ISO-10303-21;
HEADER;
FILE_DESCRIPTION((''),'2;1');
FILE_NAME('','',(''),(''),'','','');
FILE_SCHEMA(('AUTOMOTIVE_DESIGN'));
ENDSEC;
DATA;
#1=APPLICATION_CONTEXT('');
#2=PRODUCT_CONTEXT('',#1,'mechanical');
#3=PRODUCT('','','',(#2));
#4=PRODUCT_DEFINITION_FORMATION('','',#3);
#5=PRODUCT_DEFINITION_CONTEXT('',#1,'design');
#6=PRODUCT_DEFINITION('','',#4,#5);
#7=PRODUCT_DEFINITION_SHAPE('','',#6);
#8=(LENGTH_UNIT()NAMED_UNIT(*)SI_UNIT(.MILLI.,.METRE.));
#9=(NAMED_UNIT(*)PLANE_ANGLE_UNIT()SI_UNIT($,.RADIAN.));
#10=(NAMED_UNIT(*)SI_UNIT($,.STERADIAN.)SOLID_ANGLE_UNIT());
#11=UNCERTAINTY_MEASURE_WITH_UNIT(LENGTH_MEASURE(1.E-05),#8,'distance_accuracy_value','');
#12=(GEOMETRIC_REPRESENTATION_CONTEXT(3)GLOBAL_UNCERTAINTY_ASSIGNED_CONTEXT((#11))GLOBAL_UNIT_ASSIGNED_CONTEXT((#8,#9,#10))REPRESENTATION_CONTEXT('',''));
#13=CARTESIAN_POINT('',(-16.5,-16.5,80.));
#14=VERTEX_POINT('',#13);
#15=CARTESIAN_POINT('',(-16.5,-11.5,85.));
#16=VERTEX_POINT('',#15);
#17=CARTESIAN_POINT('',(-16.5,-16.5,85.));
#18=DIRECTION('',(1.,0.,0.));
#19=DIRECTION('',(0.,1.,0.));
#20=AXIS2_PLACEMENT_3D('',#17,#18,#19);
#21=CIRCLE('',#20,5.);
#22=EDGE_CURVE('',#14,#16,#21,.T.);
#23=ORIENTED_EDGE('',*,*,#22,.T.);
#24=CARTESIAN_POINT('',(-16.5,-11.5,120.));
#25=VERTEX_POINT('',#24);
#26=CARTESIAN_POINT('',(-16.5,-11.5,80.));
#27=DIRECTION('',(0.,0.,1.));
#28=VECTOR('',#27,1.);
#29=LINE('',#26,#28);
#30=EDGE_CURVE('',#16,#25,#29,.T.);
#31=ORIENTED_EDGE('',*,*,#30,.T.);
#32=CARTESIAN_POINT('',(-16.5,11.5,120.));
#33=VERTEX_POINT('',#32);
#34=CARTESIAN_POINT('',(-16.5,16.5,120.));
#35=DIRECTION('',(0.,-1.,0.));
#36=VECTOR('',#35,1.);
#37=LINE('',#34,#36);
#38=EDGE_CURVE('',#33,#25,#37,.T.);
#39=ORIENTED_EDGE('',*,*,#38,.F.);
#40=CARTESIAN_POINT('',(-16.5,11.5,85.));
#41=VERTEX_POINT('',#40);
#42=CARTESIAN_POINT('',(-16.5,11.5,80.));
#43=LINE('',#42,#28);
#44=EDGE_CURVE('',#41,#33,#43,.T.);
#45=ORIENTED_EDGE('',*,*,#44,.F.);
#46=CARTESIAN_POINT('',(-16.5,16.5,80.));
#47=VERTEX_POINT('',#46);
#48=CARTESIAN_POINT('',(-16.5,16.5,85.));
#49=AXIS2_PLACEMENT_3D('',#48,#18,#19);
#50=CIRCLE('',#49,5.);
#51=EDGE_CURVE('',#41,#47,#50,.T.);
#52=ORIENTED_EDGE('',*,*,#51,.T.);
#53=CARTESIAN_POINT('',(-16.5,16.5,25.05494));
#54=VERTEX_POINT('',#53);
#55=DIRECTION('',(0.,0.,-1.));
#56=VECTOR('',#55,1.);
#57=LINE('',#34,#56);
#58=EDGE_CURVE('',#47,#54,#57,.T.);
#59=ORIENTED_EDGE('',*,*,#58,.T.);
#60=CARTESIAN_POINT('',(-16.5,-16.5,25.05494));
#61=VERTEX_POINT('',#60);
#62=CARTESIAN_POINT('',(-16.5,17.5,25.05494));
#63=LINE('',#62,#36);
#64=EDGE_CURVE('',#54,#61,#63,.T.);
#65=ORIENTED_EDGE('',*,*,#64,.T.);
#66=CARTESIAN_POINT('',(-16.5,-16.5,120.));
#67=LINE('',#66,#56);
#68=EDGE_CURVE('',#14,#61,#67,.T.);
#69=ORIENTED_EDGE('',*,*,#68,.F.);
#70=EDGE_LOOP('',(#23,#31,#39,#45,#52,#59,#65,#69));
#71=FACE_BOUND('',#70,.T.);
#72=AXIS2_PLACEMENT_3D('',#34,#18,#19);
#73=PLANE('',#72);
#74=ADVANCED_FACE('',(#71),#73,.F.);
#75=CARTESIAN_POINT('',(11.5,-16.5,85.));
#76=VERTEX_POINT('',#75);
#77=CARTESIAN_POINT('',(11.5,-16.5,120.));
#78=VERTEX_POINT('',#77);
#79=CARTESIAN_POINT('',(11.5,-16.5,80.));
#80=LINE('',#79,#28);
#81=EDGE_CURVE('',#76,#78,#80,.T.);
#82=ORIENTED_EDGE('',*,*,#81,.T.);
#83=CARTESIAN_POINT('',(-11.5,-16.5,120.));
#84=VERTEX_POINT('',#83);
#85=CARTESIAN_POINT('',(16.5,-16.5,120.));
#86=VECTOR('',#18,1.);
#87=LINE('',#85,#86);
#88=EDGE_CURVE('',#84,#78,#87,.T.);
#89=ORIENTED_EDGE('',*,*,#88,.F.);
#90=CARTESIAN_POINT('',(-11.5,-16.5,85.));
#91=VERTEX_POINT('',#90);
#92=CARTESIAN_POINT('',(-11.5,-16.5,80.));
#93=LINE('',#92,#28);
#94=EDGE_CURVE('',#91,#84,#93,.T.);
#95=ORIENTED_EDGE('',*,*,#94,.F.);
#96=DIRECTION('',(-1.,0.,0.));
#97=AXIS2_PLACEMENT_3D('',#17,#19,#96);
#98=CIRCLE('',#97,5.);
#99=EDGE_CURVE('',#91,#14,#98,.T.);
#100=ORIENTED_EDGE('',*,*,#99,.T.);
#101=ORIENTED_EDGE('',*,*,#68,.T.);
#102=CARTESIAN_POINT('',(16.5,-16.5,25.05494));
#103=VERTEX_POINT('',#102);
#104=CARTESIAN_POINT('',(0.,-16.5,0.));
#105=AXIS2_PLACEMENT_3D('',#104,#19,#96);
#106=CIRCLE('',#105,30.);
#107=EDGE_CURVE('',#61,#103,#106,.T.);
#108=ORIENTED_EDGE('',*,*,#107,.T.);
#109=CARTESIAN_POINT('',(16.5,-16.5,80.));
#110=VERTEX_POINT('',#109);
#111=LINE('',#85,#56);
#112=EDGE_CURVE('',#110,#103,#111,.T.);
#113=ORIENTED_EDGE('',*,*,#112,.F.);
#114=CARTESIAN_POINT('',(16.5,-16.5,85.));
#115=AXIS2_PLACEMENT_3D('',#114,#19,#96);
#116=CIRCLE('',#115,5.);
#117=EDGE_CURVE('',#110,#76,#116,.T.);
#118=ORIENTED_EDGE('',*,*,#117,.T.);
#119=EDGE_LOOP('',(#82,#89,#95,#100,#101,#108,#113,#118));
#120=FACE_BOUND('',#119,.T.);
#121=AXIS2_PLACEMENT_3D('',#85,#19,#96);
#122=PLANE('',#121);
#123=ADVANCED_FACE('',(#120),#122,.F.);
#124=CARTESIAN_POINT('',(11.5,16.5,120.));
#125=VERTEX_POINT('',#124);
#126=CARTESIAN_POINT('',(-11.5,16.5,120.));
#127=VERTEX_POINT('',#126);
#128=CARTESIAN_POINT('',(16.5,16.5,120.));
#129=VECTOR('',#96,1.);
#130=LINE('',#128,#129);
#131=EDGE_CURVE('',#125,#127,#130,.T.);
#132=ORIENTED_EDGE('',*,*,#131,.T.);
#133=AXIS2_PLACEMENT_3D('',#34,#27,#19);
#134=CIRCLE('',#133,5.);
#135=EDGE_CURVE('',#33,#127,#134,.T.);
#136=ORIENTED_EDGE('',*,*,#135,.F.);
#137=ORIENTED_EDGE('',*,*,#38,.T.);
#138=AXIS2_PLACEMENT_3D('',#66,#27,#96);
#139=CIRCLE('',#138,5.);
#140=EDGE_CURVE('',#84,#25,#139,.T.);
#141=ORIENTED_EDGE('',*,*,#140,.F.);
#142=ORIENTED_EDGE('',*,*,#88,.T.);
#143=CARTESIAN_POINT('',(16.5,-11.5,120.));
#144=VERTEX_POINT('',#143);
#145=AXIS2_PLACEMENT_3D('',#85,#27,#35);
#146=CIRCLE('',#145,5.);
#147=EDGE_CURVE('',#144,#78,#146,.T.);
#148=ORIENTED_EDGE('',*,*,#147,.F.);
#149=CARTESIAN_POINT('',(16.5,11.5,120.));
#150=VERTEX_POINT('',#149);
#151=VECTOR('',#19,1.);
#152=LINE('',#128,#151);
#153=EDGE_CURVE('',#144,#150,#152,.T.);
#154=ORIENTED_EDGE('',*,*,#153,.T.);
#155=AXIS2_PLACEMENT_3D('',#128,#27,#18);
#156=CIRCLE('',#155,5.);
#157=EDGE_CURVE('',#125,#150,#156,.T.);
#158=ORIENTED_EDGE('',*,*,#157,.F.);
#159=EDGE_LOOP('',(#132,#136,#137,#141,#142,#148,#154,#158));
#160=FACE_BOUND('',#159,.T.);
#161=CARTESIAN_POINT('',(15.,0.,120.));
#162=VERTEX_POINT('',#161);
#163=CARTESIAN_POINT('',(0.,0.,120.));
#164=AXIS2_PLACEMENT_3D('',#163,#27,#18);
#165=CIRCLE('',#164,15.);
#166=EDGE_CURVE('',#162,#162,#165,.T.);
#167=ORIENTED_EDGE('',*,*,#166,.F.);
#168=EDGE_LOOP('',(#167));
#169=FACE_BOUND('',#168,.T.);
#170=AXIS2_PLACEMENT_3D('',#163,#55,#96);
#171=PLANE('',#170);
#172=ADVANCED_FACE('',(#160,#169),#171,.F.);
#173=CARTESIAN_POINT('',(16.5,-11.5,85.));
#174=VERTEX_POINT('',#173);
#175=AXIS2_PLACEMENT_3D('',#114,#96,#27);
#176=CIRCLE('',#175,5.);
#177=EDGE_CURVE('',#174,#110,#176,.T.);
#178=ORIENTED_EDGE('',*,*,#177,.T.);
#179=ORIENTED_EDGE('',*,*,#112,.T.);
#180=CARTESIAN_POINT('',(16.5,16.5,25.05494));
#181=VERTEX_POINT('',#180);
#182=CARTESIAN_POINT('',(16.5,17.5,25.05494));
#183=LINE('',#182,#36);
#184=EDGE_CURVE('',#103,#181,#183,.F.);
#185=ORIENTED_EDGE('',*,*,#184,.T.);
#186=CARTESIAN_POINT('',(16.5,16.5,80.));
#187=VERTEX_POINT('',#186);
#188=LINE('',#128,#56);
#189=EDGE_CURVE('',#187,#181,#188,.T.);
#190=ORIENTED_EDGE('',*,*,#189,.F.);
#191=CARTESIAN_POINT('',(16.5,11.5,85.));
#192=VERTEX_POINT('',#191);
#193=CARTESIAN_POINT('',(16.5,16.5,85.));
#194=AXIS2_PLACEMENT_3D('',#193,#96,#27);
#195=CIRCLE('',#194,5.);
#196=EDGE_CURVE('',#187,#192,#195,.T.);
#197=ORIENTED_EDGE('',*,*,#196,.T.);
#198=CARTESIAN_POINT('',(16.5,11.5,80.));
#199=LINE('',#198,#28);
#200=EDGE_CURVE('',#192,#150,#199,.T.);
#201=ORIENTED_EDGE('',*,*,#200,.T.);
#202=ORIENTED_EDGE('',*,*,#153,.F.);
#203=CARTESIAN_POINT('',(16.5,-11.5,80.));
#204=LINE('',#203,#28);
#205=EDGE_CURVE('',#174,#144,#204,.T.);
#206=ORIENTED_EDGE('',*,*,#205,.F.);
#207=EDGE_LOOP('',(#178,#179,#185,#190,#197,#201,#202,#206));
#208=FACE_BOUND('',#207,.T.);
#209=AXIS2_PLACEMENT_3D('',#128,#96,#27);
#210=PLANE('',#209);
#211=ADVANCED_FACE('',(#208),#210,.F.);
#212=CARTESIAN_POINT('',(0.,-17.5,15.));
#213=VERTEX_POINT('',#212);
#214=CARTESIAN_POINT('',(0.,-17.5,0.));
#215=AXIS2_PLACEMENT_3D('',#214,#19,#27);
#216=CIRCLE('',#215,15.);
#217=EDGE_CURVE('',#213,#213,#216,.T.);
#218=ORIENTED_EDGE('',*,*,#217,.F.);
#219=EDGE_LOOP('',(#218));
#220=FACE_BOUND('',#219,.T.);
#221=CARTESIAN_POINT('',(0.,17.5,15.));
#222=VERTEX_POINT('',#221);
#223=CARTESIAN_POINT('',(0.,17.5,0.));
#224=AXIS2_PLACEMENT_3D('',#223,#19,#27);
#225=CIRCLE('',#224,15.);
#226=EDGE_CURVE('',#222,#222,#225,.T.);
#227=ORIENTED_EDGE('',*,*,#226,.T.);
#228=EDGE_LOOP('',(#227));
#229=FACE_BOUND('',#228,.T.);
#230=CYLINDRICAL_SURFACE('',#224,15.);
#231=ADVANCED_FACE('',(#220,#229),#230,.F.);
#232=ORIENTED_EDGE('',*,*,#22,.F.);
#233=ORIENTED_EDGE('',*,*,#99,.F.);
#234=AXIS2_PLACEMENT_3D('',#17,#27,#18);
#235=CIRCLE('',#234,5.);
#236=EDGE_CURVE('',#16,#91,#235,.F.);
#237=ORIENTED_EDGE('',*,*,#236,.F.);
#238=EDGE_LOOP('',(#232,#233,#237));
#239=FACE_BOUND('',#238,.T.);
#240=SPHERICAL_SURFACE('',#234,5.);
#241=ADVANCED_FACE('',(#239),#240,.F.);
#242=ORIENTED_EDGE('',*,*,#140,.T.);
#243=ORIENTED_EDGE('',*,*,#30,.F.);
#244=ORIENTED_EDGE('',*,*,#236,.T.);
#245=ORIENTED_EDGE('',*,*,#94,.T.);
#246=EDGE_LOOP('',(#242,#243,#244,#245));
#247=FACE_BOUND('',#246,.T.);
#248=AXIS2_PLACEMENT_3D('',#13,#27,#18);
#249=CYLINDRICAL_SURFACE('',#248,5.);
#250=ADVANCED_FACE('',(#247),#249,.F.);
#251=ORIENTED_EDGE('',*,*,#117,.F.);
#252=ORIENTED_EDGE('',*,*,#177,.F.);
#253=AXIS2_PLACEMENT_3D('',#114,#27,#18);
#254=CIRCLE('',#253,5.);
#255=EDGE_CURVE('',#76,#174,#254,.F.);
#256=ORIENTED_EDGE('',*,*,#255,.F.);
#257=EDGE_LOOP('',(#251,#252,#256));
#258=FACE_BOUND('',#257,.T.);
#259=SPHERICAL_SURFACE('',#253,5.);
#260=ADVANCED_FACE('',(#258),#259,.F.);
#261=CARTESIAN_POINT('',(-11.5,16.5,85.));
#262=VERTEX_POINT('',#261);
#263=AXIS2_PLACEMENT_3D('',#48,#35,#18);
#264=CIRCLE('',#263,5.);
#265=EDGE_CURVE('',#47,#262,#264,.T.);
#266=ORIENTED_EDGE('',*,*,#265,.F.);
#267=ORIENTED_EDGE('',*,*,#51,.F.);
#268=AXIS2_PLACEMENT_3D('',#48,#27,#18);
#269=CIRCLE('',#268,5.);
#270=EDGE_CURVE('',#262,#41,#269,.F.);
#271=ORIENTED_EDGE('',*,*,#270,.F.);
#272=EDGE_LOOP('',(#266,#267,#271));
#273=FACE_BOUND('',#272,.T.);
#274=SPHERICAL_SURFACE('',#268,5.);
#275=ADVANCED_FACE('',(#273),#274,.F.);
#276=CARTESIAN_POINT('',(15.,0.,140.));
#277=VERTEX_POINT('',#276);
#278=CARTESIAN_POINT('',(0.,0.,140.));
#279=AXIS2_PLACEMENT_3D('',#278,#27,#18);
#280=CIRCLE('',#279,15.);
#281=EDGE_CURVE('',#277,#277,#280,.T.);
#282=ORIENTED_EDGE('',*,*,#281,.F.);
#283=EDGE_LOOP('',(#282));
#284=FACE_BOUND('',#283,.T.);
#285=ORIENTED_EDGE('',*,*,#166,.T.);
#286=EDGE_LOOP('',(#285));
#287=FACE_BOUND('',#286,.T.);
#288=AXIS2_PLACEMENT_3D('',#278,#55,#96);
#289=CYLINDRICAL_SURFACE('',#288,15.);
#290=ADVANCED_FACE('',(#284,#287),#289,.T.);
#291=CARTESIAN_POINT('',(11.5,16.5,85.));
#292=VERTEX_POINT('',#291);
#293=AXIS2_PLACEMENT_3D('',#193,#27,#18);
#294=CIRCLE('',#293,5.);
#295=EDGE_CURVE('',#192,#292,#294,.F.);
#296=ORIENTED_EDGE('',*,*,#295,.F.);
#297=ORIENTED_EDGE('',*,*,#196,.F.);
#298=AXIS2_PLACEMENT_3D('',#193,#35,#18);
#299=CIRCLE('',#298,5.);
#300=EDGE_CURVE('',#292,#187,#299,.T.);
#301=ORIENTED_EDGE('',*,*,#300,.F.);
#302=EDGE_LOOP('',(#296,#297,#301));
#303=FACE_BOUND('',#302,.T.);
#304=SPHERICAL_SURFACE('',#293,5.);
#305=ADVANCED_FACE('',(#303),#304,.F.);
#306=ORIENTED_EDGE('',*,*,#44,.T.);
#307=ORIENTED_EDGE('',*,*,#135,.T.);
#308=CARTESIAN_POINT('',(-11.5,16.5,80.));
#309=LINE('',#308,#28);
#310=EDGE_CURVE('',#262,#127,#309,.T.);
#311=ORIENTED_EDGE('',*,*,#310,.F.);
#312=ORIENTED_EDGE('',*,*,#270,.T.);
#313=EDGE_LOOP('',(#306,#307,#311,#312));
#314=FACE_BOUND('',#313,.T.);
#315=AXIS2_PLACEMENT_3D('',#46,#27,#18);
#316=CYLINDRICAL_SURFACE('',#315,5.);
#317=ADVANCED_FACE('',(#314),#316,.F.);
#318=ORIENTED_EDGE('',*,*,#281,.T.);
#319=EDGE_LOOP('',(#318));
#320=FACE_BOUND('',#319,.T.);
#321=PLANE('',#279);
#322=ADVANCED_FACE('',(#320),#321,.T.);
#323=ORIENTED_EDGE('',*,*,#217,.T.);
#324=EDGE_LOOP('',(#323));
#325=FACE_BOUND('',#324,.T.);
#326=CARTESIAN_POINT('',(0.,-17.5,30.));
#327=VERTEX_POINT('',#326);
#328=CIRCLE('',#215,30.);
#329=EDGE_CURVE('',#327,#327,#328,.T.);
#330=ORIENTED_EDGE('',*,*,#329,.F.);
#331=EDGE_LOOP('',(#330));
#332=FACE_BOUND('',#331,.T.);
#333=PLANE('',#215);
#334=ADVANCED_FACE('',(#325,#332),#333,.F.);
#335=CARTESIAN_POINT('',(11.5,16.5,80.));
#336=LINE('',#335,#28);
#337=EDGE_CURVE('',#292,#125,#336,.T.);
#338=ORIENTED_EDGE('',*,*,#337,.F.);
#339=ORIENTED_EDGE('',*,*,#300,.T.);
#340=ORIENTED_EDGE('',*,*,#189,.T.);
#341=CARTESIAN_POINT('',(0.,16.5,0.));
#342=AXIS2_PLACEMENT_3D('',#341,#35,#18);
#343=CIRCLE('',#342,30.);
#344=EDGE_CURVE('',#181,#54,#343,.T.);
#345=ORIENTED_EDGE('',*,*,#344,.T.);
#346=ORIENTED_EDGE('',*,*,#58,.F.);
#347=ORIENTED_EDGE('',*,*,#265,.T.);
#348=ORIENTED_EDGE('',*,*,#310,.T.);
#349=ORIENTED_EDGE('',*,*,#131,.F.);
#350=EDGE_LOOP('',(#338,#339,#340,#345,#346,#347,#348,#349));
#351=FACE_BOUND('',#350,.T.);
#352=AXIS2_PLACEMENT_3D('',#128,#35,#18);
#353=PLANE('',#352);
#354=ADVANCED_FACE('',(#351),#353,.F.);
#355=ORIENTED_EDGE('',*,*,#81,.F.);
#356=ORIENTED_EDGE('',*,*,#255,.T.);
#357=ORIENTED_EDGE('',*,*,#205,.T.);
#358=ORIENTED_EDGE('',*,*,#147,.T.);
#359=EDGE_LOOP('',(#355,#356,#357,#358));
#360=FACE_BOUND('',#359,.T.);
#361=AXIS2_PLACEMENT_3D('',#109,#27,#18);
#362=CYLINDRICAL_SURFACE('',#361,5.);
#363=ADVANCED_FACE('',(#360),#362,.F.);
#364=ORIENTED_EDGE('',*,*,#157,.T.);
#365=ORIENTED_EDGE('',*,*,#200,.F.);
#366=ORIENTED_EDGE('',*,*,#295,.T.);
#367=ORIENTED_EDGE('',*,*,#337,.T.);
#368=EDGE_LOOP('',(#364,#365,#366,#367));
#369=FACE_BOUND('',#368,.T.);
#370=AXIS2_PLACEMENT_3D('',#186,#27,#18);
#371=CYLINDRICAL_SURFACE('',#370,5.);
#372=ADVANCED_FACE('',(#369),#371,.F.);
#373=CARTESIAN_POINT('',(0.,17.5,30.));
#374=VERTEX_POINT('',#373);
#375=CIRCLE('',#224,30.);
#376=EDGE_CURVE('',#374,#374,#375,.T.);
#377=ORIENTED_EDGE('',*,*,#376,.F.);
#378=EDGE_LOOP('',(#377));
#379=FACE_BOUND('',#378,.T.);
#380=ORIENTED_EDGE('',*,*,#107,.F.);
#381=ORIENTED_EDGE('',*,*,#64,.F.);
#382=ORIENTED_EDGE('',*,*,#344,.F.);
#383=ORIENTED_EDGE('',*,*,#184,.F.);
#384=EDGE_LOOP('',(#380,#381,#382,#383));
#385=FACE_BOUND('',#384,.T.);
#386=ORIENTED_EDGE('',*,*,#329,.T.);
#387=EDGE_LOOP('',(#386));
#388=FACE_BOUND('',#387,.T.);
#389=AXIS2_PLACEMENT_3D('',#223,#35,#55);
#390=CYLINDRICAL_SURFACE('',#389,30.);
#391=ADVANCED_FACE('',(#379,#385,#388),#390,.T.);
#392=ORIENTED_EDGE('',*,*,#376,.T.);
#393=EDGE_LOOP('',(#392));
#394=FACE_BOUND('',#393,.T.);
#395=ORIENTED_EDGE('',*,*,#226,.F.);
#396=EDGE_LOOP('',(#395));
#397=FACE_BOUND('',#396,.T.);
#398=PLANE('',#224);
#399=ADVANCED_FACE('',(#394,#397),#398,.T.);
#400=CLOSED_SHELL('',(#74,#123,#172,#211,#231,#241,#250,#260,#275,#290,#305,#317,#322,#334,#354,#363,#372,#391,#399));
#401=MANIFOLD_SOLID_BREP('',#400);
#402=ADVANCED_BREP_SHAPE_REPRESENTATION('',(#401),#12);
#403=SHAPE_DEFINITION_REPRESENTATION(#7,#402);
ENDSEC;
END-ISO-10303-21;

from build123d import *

# Parameters (mm, degrees)
SKETCH1_R                = 30
BOSS_EXTRUDE1_DEPTH      = 17.5
SKETCH2_W                = 33
SKETCH2_H                = 33
BOSS_EXTRUDE2_DEPTH      = 120
SKETCH3_R                = 15
BOSS_EXTRUDE3_DEPTH      = 20
HOLE1_D                  = 30
CUT_EXTRUDE1_DEPTH       = 40
FILLET1_R                = 5
CIRPATTERN1_COUNT        = 4
FILLET1_OF_CIRPATTERN1_R = 5


with BuildPart() as part:
    # Sketch1 → Boss-Extrude1 (new, symmetric)
    with BuildSketch(Plane(origin=(0, 0, 0), x_dir=(1, 0, 0), z_dir=(0, 1, 0))):
        with Locations(Location((0, 0, 0), (0, 0, 270))):
            Circle(SKETCH1_R)
    extrude(amount=BOSS_EXTRUDE1_DEPTH, both=True)

    # Sketch2 → Boss-Extrude2 (add)
    with BuildSketch(Plane.XY):
        Rectangle(SKETCH2_W, SKETCH2_H)
    extrude(amount=BOSS_EXTRUDE2_DEPTH)

    # Sketch3 → Boss-Extrude3 (add)
    with BuildSketch(Plane.XY.offset(120)):
        Circle(SKETCH3_R)
    extrude(amount=BOSS_EXTRUDE3_DEPTH)

    # Hole1 (through all)
    with Locations(Plane(origin=(0, 17.5, 0), x_dir=(1, 0, 0), z_dir=(0, 1, 0))):
        with Locations((0, 0)):
            Hole(HOLE1_D / 2)

    # Sketch6 → Cut-Extrude1 (cut)
    with BuildSketch(Plane.XY.offset(120)):
        with BuildLine():
            Line((11.5, 16.5), (16.5, 16.5))
            Line((16.5, 16.5), (16.5, 11.5))
            ThreePointArc((16.5, 11.5), (12.964466094, 12.964466094), (11.5, 16.5))
        make_face()
    cut_extrude1 = extrude(amount=-CUT_EXTRUDE1_DEPTH, mode=Mode.SUBTRACT)

    # Fillet1
    fillet1_edges = [part.edges().sort_by_distance(p)[0] for p in [
        (12.964466094, 12.964466094, 80),
    ]]
    fillet(fillet1_edges, radius=FILLET1_R - 0.0001)  # a hair under: the kernel refuses the full size

    # CirPattern1: Cut-Extrude1 ×4 about axis
    cirpattern1_axis = Axis((0, 0, 0), (0, 0, 1))
    for i in range(1, CIRPATTERN1_COUNT):
        add(cut_extrude1.rotate(cirpattern1_axis, i * 360 / CIRPATTERN1_COUNT), mode=Mode.SUBTRACT)

    # Fillet1 of CirPattern1
    fillet1_of_cirpattern1_edges = [part.edges().sort_by_distance(p)[0] for p in [
        (-12.964466094, 12.964466094, 80),
        (-12.964466094, -12.964466094, 80),
        (12.964466094, -12.964466094, 80),
    ]]
    fillet(fillet1_of_cirpattern1_edges, radius=FILLET1_OF_CIRPATTERN1_R - 0.0001)  # a hair under: the kernel refuses the full size


solid = part.part
